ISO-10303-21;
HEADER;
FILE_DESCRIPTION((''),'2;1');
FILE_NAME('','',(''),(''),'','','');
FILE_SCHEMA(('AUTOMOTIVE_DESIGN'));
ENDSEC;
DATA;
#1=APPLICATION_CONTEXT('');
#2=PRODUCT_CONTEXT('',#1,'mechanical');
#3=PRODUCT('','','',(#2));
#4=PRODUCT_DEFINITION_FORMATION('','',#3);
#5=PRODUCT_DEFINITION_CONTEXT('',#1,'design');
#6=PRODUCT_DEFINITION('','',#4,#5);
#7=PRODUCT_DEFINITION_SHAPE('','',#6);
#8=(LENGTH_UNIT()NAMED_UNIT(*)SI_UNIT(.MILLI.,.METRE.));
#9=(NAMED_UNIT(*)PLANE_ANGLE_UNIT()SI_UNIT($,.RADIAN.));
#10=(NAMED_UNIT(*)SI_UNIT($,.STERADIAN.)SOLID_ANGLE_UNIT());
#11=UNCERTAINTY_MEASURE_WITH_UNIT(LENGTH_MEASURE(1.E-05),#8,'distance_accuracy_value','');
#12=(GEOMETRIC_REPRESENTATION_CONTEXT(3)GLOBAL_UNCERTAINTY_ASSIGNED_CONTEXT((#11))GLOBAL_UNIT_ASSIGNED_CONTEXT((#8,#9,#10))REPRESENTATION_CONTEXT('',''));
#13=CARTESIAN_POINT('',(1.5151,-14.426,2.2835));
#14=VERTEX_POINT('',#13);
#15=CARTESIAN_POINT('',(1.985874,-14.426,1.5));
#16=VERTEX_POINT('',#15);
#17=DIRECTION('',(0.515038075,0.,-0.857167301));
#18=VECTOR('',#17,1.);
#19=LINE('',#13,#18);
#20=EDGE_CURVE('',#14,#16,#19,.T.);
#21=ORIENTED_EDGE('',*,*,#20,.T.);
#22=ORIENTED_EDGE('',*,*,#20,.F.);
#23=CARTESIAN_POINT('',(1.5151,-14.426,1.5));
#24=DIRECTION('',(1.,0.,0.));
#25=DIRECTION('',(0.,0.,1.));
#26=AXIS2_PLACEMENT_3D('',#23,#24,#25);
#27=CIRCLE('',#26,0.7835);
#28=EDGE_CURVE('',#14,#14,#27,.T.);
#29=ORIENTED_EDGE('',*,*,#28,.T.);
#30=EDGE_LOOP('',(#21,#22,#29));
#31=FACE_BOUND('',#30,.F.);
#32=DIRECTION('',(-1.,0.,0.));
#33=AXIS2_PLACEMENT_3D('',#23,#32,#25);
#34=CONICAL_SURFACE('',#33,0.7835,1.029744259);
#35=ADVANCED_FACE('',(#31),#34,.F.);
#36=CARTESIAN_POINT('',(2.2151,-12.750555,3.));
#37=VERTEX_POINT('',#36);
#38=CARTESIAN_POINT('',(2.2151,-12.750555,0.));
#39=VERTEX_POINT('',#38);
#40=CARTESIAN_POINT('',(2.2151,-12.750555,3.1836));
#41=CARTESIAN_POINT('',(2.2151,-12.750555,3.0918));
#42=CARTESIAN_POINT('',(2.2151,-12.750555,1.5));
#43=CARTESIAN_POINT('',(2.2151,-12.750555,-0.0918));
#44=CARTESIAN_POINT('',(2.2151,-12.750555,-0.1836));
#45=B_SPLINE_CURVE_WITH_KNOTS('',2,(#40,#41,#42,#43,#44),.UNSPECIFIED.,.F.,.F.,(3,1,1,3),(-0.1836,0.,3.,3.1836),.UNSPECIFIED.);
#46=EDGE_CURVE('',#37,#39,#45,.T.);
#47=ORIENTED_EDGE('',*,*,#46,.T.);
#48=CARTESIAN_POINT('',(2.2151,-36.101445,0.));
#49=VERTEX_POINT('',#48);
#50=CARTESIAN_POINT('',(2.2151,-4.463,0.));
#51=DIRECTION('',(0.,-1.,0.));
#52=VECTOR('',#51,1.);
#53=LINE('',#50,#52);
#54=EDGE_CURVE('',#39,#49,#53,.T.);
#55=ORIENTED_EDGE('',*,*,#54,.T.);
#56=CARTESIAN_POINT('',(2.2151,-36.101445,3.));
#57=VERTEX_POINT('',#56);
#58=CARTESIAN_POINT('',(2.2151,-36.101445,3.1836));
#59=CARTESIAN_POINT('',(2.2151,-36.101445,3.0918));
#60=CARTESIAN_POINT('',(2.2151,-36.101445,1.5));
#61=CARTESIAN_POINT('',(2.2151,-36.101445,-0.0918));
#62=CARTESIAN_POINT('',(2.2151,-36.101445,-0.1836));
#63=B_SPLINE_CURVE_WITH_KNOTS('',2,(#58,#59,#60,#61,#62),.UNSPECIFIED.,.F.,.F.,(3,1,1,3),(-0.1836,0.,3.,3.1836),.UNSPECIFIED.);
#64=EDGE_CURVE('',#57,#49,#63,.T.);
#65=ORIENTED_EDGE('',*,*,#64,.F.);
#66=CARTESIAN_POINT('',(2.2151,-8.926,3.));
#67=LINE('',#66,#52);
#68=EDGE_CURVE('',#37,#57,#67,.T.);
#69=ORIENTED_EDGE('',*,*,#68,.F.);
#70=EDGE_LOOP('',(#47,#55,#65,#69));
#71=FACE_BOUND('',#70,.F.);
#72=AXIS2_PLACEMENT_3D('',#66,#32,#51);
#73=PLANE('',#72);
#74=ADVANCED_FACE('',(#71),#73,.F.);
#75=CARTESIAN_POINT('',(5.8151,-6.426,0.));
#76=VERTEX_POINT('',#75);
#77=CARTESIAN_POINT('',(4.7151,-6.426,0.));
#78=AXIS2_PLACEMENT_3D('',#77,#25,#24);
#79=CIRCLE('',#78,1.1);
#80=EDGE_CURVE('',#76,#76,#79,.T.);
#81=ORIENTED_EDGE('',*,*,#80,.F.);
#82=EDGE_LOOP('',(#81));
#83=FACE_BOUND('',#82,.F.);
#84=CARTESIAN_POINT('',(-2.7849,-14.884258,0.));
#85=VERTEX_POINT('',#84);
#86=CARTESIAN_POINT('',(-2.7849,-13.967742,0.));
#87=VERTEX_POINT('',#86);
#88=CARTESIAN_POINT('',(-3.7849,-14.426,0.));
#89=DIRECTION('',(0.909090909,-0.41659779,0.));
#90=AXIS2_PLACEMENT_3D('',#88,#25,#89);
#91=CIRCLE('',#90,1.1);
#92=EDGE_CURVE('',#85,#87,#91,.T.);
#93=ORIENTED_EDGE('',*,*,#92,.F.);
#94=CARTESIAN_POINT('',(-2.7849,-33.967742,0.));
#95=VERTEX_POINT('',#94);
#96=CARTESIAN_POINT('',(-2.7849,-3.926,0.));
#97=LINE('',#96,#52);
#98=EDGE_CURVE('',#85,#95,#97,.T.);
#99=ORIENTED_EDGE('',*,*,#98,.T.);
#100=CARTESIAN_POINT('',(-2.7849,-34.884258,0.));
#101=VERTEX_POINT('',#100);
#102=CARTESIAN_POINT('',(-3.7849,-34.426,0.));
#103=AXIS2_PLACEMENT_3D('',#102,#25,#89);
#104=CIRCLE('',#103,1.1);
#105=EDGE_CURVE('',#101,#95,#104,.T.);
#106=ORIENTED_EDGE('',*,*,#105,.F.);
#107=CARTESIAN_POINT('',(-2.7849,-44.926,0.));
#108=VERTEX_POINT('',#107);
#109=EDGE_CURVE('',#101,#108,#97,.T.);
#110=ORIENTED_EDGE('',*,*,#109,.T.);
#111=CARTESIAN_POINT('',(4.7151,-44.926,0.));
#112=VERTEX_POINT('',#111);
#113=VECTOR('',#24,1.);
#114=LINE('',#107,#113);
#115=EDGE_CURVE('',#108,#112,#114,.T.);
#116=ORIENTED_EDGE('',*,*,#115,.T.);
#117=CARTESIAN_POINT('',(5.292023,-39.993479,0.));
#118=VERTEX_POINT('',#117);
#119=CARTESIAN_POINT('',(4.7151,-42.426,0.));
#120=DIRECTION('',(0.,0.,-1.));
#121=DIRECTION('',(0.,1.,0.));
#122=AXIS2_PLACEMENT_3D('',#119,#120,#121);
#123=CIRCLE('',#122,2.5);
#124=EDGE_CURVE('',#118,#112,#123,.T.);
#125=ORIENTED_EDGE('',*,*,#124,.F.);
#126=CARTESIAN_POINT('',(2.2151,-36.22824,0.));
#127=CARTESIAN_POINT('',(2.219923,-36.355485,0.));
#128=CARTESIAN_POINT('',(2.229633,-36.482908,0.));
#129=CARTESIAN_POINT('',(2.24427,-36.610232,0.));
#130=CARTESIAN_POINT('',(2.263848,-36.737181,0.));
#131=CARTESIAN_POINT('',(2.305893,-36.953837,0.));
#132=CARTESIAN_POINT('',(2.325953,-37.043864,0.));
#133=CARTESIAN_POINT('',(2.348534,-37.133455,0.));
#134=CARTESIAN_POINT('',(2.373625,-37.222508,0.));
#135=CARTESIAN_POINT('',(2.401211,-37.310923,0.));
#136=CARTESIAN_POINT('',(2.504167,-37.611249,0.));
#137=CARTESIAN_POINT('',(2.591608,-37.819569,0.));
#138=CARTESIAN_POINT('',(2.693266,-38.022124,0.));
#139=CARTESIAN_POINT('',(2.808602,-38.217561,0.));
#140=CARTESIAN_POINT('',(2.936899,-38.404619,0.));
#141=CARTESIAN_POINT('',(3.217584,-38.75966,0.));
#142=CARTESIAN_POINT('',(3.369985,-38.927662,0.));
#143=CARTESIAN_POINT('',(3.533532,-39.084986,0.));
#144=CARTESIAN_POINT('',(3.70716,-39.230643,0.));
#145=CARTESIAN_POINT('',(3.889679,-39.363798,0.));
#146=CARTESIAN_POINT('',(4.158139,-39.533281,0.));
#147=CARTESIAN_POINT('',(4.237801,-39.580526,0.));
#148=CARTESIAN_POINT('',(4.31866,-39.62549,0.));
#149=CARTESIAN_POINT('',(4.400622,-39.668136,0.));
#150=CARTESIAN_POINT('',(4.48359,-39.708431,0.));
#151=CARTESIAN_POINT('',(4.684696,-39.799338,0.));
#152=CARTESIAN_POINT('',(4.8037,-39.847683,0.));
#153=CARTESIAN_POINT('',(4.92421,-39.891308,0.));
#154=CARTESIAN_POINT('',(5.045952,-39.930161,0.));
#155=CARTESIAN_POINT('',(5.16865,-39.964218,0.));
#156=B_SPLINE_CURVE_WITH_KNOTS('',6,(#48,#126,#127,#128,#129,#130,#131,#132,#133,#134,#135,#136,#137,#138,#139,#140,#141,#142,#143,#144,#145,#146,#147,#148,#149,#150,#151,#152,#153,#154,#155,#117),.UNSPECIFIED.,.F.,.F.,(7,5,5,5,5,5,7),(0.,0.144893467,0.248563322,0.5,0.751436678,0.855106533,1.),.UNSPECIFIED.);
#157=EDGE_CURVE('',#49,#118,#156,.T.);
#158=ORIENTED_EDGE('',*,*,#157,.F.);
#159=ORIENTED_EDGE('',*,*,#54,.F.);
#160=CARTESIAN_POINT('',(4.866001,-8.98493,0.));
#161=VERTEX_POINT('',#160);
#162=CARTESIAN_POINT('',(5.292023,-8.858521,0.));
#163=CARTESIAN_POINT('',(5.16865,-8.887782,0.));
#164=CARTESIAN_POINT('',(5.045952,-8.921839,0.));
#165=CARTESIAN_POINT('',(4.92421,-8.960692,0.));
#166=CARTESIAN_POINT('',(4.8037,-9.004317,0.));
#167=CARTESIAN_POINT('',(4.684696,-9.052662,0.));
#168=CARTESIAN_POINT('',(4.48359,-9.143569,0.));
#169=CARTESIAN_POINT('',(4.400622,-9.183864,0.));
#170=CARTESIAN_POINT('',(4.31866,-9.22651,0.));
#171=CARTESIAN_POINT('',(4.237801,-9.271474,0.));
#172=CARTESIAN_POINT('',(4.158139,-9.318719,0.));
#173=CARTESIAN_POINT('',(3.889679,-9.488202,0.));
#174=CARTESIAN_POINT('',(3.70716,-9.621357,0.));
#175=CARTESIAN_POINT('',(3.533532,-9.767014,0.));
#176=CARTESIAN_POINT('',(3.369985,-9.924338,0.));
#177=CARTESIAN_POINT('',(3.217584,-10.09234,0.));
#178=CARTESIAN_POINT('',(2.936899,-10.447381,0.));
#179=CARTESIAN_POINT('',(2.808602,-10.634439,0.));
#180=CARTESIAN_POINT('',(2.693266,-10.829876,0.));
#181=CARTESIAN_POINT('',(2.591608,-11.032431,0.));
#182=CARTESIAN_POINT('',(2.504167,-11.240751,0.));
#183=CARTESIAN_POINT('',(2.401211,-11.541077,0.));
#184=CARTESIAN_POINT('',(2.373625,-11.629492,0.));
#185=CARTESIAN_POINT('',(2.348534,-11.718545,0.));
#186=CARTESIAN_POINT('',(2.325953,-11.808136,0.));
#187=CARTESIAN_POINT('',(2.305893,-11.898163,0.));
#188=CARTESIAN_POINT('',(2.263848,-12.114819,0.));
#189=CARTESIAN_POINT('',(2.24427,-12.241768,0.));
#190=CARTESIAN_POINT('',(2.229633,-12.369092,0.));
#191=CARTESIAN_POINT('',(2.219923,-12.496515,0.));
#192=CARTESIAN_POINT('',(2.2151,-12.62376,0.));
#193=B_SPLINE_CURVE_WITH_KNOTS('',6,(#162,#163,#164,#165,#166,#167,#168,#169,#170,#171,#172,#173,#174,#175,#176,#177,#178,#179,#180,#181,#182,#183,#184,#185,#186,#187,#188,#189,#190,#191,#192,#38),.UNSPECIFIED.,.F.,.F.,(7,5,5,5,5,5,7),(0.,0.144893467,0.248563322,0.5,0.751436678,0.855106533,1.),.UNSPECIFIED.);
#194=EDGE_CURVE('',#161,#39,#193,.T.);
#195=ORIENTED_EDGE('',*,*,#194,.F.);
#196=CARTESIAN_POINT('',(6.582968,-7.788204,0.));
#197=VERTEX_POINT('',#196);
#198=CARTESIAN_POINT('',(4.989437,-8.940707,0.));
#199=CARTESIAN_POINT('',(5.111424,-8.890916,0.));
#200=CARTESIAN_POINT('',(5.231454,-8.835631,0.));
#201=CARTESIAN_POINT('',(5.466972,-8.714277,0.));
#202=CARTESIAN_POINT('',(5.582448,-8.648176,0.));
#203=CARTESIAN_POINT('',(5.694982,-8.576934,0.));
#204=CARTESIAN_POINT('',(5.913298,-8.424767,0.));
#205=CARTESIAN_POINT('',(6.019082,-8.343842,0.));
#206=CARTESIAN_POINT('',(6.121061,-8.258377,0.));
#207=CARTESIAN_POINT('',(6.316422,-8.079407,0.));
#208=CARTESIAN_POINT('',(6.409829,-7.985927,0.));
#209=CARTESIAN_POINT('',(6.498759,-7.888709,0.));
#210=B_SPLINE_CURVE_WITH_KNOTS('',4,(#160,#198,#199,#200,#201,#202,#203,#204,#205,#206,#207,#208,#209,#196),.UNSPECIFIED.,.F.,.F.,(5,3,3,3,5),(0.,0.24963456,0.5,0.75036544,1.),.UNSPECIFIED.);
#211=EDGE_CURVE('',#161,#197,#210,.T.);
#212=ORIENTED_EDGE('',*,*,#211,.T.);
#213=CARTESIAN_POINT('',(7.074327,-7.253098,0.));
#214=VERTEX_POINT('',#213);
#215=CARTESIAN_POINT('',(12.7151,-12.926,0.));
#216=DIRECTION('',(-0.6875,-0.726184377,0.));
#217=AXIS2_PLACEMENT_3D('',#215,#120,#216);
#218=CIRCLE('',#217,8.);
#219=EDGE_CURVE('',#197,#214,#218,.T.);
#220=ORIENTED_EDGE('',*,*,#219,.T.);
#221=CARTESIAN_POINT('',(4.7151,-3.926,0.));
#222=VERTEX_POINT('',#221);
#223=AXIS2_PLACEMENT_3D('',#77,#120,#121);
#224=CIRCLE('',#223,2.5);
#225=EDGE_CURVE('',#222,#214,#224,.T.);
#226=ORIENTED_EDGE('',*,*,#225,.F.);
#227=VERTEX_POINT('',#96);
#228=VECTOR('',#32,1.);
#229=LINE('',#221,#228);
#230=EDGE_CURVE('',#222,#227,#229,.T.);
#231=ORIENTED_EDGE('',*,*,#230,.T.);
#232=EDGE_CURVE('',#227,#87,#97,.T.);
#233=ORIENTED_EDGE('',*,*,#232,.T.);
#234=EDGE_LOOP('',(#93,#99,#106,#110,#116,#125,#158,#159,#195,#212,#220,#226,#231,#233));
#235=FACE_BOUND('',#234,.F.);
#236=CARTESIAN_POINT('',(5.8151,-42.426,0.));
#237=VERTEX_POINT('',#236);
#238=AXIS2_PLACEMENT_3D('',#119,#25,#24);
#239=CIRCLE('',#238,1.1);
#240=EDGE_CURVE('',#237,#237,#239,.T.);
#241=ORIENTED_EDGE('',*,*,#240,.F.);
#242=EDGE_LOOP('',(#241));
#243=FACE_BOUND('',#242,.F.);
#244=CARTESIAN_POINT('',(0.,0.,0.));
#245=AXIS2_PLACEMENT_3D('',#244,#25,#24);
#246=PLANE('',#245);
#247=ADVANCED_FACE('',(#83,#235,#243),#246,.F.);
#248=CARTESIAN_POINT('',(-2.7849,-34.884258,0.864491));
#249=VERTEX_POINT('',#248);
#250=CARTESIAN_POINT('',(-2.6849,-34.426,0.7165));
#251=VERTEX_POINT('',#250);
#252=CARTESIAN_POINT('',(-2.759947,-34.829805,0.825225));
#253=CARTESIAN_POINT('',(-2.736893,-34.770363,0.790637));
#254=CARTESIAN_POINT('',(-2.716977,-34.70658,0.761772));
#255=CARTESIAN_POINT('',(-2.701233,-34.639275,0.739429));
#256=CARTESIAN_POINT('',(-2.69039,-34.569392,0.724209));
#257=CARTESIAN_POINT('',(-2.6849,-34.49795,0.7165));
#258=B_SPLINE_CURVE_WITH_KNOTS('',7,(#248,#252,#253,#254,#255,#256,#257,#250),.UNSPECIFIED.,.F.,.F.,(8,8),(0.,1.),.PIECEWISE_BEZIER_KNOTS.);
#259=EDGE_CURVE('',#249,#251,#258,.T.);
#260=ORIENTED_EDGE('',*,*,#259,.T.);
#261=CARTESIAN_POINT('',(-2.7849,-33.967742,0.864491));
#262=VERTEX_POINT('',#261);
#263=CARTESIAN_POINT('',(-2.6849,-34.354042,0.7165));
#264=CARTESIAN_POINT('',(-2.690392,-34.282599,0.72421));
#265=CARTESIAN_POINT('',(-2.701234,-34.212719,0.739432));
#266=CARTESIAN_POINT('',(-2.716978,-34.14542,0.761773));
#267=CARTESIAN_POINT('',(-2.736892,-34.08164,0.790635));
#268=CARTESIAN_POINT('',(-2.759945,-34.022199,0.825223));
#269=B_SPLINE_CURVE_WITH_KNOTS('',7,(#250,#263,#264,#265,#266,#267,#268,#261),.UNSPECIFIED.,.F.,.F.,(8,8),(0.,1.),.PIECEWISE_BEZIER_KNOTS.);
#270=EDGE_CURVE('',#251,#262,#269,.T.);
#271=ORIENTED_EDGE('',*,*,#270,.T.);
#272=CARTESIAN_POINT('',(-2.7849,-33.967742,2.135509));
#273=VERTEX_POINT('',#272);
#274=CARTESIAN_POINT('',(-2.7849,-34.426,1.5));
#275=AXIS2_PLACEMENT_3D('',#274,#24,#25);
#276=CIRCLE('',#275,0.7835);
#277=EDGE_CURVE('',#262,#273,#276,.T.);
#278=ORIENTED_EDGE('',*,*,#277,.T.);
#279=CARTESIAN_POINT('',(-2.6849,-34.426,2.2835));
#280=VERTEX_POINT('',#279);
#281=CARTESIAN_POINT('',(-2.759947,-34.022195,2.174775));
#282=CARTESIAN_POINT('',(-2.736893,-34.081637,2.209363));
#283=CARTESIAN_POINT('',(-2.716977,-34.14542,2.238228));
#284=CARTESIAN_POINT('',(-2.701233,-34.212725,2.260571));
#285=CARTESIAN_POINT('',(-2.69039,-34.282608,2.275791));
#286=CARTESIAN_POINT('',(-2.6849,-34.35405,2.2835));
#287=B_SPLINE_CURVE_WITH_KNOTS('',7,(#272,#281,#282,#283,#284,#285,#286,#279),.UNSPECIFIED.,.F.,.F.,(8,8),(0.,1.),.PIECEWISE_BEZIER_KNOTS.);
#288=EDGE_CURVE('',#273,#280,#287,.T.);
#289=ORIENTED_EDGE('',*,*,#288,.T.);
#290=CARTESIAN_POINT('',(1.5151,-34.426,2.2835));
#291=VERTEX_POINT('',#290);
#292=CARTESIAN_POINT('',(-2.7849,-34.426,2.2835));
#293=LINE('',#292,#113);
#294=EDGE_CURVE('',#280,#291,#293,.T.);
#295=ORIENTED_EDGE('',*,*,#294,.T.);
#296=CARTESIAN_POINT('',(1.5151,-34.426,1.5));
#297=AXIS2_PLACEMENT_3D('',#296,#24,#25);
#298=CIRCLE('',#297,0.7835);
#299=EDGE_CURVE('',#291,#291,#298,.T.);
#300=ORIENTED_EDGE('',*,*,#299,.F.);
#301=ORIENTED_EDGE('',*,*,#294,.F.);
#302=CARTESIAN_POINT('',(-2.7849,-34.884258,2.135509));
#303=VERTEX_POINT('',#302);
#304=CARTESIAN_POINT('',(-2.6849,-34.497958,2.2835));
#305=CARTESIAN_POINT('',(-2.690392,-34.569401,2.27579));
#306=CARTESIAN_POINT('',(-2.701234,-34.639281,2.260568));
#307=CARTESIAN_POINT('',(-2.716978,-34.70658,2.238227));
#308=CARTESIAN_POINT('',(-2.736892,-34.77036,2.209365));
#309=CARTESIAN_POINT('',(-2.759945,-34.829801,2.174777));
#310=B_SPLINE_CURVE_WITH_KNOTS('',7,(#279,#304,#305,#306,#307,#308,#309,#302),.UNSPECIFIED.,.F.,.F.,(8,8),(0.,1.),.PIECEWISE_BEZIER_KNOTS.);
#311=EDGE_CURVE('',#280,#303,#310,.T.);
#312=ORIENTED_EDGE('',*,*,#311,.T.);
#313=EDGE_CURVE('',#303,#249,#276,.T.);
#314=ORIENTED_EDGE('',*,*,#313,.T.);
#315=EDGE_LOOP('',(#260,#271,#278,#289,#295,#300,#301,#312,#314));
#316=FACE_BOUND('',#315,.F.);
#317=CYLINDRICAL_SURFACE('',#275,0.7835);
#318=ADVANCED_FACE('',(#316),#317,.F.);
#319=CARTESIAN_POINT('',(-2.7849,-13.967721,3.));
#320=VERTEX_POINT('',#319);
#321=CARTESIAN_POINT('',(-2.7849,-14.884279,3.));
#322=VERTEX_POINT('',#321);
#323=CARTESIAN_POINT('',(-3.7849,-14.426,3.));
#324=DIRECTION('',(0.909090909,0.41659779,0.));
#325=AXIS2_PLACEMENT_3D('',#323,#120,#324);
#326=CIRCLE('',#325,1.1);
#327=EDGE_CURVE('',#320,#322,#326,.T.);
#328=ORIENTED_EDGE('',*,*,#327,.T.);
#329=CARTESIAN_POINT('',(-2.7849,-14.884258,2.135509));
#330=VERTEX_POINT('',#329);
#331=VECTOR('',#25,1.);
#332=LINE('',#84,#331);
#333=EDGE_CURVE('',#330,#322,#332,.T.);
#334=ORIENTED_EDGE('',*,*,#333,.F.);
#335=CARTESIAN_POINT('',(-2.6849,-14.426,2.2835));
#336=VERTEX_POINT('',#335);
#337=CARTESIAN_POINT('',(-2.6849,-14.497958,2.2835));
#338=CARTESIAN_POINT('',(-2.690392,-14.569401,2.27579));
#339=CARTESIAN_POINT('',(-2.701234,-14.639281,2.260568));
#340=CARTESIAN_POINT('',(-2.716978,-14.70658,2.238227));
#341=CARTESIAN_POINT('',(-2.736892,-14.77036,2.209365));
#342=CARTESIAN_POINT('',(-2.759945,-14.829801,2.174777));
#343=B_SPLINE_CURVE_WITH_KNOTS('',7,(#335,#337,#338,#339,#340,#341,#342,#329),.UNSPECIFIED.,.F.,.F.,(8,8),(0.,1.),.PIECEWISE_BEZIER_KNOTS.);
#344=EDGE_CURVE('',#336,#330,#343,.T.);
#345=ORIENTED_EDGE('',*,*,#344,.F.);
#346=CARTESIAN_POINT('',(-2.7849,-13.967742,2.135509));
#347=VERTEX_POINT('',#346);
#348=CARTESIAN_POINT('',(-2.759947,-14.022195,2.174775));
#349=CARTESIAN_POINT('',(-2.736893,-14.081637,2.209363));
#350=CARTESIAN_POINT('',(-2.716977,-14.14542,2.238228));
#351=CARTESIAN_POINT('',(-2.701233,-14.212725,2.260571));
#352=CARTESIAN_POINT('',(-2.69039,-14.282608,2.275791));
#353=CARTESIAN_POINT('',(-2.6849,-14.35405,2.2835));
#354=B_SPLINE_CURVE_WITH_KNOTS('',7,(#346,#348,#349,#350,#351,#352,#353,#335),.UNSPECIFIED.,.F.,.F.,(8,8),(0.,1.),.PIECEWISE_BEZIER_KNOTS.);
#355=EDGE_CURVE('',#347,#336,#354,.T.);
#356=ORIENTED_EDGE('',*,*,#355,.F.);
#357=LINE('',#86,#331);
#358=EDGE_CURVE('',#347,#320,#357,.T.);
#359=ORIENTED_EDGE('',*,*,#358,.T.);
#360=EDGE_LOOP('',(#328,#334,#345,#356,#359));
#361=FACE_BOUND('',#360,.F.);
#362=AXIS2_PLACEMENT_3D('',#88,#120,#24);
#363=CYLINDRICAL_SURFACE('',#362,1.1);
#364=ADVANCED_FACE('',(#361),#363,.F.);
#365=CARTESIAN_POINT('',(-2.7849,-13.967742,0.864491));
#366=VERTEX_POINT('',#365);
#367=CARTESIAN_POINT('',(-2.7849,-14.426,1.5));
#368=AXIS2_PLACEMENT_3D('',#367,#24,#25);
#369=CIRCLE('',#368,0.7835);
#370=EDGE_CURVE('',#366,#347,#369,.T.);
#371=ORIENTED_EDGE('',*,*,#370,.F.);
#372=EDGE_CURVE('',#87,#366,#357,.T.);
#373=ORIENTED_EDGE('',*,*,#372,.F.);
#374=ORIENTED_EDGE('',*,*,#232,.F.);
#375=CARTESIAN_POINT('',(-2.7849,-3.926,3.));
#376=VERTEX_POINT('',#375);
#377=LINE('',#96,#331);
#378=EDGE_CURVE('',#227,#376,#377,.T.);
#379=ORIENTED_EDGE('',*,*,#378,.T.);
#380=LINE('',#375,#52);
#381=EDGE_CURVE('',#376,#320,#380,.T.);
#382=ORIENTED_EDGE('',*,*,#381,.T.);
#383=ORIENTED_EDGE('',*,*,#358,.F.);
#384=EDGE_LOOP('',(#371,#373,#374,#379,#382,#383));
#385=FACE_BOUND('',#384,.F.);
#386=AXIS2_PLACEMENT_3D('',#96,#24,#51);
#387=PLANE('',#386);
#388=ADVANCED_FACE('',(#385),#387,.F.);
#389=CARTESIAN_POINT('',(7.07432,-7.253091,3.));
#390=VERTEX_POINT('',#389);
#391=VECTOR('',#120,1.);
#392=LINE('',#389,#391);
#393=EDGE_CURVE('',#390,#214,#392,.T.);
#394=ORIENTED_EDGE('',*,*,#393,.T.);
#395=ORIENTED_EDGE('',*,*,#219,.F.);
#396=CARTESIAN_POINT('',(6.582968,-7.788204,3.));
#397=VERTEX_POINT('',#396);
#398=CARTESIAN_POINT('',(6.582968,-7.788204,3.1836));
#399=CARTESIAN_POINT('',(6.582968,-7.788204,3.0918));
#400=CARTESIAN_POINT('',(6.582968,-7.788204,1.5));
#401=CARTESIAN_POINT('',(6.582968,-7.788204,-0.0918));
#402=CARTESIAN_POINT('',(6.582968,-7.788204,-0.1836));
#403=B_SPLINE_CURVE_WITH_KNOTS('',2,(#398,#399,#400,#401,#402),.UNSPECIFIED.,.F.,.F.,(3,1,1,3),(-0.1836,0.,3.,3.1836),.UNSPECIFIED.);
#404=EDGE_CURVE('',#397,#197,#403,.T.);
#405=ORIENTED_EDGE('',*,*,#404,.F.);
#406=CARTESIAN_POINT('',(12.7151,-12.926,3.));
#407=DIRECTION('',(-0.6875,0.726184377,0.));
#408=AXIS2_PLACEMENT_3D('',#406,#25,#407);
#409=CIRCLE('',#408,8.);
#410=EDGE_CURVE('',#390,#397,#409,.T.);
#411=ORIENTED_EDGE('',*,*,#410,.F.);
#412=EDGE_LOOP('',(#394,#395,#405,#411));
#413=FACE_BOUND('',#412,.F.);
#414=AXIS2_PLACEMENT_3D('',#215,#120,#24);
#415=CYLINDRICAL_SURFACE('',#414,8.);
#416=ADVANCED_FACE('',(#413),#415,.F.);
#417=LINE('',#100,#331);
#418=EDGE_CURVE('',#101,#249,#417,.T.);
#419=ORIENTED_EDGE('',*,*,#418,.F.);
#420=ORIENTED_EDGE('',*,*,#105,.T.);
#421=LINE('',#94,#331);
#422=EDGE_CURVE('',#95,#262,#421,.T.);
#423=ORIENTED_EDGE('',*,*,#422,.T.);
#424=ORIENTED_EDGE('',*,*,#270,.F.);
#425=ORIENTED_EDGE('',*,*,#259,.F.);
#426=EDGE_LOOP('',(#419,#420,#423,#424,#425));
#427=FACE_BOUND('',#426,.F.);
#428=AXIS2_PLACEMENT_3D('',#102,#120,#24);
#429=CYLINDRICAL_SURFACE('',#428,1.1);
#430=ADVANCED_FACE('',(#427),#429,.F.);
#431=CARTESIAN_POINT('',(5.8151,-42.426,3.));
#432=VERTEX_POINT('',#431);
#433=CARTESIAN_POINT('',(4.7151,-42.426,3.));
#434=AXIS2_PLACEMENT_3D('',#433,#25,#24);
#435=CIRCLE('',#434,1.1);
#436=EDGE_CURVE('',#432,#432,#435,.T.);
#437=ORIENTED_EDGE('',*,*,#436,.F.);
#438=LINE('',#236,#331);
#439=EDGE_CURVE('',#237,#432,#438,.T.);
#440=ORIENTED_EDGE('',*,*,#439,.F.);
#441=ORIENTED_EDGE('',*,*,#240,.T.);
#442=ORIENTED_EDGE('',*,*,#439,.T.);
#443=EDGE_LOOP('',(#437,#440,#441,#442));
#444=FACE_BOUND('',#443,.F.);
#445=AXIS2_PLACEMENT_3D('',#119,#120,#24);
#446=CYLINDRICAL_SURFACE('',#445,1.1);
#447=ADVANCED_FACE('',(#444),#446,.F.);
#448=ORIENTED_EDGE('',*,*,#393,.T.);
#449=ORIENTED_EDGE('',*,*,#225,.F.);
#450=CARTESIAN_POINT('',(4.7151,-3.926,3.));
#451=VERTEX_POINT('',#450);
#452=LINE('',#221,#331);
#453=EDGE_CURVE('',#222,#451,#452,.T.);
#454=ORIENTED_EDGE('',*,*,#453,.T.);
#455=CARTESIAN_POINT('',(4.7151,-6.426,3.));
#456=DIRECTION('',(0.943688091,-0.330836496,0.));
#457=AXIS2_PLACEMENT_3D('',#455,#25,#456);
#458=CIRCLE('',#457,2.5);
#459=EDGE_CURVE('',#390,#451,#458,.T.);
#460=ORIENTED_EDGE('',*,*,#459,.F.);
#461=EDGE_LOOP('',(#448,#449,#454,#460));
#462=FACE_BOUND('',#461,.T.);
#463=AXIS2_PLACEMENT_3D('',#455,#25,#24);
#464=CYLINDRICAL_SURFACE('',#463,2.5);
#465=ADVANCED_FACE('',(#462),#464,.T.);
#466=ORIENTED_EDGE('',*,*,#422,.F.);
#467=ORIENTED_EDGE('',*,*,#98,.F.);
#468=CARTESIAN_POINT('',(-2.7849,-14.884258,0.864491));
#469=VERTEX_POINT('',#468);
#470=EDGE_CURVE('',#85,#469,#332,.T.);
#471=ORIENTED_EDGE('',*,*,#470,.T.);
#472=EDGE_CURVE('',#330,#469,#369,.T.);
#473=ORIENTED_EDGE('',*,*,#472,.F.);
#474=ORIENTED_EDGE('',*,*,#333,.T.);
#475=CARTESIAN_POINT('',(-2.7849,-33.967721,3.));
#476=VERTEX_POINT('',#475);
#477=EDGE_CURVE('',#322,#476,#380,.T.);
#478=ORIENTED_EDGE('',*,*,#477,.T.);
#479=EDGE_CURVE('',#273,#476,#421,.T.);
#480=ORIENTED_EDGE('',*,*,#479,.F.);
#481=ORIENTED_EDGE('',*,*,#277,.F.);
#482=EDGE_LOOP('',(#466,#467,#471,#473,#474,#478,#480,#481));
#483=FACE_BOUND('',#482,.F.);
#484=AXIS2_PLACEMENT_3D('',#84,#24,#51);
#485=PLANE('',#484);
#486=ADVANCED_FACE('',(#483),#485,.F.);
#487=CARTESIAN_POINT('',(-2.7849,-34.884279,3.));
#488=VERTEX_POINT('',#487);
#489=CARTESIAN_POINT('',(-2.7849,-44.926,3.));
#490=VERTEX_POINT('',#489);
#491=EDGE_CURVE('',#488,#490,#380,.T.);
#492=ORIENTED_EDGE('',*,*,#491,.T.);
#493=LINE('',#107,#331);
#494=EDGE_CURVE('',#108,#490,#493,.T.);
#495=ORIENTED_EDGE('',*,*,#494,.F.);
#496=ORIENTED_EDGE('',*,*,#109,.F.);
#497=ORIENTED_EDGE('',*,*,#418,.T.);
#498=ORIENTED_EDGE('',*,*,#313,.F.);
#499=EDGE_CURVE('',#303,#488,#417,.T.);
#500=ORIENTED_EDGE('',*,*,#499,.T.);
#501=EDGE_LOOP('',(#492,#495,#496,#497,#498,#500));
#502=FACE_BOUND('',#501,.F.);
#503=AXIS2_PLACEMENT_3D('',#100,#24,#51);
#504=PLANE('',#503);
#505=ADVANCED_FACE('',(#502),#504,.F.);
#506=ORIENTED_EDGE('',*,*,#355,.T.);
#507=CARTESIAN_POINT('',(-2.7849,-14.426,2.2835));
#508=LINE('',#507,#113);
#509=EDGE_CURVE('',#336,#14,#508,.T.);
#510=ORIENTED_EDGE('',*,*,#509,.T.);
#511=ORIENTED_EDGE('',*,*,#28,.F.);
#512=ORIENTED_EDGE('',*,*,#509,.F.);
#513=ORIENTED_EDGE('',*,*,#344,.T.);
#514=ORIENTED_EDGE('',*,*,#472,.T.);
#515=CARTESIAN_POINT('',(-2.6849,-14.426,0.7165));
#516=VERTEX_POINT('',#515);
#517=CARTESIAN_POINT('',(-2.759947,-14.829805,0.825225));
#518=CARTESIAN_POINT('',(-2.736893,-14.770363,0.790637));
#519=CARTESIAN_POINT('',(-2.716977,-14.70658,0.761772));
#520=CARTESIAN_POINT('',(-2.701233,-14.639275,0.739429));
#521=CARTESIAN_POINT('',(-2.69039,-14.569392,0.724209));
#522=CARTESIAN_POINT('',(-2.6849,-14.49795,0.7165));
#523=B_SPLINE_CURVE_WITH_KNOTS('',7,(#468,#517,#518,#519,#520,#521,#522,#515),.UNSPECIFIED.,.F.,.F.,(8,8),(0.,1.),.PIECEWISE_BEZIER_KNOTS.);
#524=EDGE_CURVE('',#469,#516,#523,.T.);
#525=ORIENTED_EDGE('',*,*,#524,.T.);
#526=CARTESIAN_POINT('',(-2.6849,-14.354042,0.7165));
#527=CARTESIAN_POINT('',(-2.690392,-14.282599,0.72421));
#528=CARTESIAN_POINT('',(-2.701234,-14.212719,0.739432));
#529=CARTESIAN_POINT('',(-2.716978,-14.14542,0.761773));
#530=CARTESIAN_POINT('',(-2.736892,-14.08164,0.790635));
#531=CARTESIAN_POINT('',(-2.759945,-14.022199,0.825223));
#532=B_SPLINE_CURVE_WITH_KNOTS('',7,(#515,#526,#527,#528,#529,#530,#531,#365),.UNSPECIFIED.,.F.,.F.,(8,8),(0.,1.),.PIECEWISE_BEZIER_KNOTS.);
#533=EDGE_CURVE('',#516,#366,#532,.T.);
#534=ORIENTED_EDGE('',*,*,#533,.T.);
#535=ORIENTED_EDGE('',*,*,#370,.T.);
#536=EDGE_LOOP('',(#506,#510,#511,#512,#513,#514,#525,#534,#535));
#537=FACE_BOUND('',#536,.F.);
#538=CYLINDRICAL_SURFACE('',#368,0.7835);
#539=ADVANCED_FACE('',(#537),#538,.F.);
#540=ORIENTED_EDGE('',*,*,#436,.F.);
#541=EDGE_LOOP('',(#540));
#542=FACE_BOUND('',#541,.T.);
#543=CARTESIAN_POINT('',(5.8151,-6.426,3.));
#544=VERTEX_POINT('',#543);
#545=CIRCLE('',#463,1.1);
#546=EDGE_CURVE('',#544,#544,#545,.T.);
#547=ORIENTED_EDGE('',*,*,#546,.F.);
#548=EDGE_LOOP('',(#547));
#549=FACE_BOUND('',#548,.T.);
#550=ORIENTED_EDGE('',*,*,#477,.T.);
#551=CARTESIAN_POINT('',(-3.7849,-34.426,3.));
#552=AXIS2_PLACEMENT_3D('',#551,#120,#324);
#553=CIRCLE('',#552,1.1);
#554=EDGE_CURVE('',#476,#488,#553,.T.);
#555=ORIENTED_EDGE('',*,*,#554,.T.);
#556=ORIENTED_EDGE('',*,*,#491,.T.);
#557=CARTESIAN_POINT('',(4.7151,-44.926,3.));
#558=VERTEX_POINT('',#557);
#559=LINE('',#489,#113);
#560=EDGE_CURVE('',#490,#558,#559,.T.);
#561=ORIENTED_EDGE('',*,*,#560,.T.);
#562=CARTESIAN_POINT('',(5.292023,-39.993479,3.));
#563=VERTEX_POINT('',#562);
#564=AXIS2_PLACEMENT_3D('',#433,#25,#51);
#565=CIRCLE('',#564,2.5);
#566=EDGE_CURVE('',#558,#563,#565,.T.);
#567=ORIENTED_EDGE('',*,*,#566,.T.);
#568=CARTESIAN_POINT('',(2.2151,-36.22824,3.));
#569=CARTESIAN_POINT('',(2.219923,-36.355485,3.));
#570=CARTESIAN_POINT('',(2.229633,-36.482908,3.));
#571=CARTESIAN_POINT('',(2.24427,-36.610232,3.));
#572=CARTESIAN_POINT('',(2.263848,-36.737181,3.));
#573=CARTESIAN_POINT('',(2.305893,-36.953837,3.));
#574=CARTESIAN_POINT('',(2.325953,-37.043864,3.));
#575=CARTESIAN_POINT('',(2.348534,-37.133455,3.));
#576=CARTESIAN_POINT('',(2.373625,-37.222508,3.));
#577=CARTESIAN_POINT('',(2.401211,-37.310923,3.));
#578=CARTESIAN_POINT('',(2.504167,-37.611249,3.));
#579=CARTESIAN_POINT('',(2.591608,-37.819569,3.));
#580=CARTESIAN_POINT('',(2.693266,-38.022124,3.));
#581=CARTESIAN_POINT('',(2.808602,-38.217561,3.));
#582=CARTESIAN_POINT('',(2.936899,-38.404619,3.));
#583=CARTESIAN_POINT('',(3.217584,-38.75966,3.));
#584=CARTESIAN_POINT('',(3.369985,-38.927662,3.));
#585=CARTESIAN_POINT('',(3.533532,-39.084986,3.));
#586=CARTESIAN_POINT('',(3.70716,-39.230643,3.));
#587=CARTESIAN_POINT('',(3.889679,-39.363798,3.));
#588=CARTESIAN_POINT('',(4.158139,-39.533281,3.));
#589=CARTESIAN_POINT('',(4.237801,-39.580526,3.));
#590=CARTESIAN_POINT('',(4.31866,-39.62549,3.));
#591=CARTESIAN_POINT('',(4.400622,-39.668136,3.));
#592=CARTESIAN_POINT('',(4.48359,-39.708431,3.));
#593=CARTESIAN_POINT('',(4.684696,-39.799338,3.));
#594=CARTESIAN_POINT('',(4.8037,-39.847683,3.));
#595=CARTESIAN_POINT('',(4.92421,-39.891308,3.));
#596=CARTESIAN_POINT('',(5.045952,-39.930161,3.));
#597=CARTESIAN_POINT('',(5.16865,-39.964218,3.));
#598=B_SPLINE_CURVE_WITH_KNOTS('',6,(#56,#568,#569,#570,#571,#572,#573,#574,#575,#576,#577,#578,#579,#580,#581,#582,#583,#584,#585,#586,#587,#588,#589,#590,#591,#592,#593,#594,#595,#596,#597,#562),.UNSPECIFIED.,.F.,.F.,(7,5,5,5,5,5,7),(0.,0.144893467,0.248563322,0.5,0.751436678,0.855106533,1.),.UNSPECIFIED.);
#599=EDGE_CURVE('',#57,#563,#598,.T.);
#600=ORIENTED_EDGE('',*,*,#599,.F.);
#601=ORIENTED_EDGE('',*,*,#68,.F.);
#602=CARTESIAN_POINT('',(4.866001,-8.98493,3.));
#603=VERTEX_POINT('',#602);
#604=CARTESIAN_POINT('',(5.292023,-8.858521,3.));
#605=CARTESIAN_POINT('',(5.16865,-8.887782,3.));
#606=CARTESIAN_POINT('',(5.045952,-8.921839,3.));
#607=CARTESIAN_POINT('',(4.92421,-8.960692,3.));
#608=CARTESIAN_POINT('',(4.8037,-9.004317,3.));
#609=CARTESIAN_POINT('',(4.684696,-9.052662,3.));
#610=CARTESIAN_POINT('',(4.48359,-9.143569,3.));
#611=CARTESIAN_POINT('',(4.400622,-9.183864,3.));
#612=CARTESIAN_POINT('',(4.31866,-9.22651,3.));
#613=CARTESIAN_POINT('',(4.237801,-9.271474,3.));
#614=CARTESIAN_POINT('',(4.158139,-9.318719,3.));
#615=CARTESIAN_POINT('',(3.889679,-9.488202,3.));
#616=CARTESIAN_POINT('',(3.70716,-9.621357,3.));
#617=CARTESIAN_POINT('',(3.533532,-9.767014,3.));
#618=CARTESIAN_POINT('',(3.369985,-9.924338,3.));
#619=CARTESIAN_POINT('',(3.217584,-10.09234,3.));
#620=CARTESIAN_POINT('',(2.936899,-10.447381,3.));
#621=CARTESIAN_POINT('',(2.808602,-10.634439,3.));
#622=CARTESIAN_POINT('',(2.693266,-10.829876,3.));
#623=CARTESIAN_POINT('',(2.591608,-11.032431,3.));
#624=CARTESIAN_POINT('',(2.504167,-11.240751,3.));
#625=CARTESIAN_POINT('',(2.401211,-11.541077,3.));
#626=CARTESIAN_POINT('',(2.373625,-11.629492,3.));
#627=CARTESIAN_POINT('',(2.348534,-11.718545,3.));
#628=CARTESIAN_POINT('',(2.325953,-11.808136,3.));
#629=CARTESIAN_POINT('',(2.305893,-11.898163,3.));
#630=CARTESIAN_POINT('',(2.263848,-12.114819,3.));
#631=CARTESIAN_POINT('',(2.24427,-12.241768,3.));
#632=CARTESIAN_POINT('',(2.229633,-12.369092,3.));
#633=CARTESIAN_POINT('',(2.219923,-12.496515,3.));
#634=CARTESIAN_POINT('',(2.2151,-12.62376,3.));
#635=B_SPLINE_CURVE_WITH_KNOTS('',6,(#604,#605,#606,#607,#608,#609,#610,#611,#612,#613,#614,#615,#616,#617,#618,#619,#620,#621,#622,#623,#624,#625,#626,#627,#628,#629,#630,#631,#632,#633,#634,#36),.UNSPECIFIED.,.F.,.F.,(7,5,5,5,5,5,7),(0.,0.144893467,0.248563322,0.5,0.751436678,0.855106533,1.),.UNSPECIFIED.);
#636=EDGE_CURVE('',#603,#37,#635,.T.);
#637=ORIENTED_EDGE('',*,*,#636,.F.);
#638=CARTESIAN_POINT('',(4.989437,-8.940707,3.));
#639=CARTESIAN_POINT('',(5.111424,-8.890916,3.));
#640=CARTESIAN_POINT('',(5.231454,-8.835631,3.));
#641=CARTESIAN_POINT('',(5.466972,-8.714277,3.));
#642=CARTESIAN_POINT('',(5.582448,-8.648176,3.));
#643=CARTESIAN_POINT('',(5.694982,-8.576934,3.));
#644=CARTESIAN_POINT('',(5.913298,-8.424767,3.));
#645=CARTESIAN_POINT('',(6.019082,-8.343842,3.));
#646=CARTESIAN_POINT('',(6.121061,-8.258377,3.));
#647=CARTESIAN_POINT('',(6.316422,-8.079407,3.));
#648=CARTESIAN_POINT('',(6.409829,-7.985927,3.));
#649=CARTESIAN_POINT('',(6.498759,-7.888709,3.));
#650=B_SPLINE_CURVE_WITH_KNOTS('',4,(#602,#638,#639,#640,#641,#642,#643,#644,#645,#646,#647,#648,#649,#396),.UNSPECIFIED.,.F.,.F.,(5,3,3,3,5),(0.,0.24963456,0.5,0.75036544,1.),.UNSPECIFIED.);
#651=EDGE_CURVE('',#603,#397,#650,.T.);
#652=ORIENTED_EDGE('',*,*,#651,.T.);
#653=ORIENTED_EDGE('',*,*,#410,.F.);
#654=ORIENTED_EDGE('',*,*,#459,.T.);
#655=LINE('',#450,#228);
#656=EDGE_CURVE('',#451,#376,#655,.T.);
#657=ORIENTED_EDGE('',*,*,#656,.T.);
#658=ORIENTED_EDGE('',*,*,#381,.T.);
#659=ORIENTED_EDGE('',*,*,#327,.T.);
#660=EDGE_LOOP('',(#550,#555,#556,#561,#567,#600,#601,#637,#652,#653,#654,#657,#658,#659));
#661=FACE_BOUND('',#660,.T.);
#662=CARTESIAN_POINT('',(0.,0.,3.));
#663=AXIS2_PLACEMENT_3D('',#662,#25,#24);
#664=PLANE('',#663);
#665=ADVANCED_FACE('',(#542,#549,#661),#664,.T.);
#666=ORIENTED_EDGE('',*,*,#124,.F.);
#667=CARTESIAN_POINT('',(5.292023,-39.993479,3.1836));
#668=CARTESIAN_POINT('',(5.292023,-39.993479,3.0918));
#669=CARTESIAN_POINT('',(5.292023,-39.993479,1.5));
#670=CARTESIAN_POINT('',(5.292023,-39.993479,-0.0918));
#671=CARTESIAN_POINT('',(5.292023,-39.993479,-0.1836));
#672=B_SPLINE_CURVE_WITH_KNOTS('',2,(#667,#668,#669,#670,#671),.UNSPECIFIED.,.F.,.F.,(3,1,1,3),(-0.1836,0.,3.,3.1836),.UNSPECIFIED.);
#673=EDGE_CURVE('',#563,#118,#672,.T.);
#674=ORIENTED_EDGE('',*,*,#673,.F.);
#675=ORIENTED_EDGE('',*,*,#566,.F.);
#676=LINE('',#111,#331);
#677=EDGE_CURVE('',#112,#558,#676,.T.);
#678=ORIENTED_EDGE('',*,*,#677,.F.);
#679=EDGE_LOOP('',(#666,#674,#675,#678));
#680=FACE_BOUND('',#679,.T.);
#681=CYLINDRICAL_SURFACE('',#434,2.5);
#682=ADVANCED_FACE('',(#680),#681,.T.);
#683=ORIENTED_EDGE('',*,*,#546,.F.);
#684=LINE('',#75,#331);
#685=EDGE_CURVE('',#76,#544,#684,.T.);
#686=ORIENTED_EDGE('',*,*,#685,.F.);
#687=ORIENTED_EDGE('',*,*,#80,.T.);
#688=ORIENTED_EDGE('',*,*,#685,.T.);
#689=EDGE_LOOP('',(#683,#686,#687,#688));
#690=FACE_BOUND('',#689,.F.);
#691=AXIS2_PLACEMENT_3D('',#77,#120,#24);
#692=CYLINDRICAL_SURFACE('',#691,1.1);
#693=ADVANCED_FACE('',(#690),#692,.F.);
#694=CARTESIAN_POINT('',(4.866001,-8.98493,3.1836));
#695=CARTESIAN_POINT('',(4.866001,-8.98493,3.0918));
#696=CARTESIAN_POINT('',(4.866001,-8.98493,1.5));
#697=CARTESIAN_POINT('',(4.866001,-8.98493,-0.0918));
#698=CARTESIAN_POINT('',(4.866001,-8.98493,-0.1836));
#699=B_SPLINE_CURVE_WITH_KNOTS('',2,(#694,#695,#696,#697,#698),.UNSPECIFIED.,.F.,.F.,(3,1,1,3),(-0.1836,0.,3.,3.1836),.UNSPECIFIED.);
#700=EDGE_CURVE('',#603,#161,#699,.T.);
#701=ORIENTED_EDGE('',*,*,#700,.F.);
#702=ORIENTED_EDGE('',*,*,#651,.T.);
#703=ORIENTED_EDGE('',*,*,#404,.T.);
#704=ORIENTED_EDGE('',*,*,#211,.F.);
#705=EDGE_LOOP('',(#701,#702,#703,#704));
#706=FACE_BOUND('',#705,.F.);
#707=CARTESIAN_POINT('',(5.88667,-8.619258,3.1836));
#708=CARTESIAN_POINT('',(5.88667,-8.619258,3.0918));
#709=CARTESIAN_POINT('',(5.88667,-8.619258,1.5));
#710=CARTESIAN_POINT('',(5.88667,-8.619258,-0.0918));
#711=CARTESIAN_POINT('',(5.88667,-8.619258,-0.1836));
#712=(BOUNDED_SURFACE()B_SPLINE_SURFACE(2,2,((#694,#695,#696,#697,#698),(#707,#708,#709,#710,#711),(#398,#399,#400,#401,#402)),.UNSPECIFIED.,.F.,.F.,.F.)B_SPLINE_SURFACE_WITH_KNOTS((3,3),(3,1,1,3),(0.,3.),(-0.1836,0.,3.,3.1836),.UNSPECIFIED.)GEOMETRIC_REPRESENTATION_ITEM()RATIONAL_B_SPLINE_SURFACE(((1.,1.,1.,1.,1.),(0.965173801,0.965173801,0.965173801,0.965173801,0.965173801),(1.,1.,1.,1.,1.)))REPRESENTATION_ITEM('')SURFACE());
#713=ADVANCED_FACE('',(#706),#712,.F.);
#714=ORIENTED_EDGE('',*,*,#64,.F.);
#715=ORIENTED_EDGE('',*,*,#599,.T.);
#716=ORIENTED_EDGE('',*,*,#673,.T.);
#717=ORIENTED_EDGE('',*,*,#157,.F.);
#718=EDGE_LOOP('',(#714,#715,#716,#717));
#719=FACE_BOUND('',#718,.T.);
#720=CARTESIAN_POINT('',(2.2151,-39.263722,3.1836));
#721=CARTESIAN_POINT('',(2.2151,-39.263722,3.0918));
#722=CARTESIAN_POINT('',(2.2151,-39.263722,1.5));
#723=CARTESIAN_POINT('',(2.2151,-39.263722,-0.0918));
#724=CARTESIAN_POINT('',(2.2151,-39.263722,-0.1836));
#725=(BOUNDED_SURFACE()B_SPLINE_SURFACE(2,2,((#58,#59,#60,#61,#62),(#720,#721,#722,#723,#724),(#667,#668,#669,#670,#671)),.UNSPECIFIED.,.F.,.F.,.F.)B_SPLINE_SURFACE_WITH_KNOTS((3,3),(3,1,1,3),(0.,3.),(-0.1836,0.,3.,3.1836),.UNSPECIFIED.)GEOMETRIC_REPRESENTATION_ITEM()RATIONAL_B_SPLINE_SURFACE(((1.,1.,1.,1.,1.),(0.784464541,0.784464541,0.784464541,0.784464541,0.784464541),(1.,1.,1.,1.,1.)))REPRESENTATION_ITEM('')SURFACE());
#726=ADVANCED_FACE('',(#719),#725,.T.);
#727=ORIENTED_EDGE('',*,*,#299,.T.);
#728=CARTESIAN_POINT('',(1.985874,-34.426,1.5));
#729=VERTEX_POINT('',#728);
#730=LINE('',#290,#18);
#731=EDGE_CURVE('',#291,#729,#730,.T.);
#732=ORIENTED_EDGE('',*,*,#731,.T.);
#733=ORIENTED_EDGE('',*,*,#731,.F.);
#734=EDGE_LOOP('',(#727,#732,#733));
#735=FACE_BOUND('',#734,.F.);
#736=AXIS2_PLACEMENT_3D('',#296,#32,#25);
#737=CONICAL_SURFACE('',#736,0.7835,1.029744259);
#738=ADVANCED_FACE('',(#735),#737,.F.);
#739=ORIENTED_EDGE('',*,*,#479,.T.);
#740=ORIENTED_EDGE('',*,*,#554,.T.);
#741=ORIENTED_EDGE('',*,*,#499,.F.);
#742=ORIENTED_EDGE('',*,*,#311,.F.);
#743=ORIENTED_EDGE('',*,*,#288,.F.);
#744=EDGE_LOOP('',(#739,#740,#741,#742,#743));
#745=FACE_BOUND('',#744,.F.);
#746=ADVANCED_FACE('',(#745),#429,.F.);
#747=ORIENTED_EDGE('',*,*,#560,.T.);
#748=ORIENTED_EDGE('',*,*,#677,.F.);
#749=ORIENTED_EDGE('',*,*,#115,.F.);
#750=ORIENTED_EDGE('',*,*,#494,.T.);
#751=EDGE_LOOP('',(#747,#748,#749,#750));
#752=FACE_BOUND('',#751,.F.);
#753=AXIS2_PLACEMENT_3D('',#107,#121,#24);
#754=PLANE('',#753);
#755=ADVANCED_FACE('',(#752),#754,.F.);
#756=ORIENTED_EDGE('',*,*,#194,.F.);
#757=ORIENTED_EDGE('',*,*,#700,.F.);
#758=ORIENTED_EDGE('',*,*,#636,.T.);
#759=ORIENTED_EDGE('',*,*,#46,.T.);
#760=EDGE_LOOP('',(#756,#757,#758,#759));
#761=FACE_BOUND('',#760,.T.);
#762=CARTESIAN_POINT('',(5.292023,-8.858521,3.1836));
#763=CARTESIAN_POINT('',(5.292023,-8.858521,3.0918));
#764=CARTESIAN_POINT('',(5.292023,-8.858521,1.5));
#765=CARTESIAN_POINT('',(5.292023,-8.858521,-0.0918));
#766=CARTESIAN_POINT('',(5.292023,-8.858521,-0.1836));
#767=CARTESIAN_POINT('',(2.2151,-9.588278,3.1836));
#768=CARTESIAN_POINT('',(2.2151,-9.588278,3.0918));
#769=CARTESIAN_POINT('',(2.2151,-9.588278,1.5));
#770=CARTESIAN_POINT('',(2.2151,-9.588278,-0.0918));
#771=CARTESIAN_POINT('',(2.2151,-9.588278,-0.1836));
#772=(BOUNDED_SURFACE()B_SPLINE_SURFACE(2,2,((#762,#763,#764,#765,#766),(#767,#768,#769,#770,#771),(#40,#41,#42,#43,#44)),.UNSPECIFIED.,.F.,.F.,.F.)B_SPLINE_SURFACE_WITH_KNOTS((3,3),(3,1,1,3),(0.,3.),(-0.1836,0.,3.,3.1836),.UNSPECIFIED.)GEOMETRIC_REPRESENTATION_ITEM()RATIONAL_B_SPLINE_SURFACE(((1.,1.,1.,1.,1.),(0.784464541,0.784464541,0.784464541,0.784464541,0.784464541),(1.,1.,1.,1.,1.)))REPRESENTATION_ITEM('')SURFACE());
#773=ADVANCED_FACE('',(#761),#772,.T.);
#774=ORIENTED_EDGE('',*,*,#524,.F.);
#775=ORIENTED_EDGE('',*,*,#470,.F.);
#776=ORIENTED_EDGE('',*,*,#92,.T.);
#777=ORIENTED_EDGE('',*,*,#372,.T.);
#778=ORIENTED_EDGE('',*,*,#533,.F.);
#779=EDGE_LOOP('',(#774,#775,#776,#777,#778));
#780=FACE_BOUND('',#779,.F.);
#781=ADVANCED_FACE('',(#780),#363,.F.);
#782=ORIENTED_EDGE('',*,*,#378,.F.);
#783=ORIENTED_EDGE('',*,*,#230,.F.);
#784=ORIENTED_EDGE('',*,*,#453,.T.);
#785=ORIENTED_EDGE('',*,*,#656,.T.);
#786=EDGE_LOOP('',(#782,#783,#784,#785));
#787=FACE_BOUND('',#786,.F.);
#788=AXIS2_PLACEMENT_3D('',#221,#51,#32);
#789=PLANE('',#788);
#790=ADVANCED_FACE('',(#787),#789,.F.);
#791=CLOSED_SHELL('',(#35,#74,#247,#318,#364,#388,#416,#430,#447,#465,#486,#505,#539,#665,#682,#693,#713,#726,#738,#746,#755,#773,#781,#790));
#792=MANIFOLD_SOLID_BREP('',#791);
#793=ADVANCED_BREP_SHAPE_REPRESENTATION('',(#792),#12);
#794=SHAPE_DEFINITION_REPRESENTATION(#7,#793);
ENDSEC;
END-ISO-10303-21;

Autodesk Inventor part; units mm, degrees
ref_plane "YZ Plane" through (0, 0, 0) normal (1, 0, 0) x (0, 1, 0)
ref_plane "XZ Plane" through (0, 0, 0) normal (0, 1, 0) x (-1, 0, 0)
ref_plane "XY Plane" through (0, 0, 0) normal (0, 0, 1) x (1, 0, 0)
sketch "スケッチ1" plane through (0, 0, 0) normal (0, 0, 1) x (1, 0, 0)
  line L0 (22.7151, -43.926) -> (22.7151, -4.926) construction
  arc A0 (22.2151, -44.426) -> (22.7151, -43.926) centre (22.2151, -43.926) ccw construction
  line L1 (3.2151, -44.426) -> (22.2151, -44.426) construction
  arc A1 (2.7151, -43.926) -> (3.2151, -44.426) centre (3.2151, -43.926) ccw construction
  line L2 (2.7151, -4.926) -> (2.7151, -43.926) construction
  arc A2 (3.2151, -4.426) -> (2.7151, -4.926) centre (3.2151, -4.926) ccw construction
  line L3 (22.2151, -4.426) -> (3.2151, -4.426) construction
  arc A3 (22.7151, -4.926) -> (22.2151, -4.426) centre (22.2151, -4.926) ccw construction
  line L4 (6.2865, -24.2474) -> (6.2865, -30.6046) construction
  line L5 (6.2865, -30.6046) -> (10.1437, -30.6046) construction
  line L6 (10.1437, -30.6046) -> (10.1437, -24.2474) construction
  line L7 (10.1437, -24.2474) -> (6.2865, -24.2474) construction
  circle A4 centre (12.7151, -31.826) radius 1.1519 construction
  line L8 (19.1437, -24.2474) -> (15.2865, -24.2474) construction
  line L9 (15.2865, -24.2474) -> (15.2865, -30.6046) construction
  line L10 (15.2865, -30.6046) -> (19.1437, -30.6046) construction
  line L11 (19.1437, -30.6046) -> (19.1437, -24.2474) construction
  circle A5 centre (4.7151, -6.426) radius 1.8131 construction
  circle A6 centre (20.7151, -6.426) radius 1.8131 construction
  circle A7 centre (4.7151, -42.426) radius 1.8131 construction
  circle A8 centre (20.7151, -42.426) radius 1.8131 construction
  arc A9 (18.9651, -12.926) -> (6.4651, -12.9153) centre (12.7151, -12.926) ccw construction
  arc A10 (6.4649, -12.9153) -> (6.2151, -12.676) centre (6.2151, -12.926) ccw construction
  line L12 (6.2151, -12.676) -> (4.4651, -12.676) construction
  arc A11 (4.4651, -12.676) -> (4.4651, -13.176) centre (4.4651, -12.926) ccw construction
  line L13 (4.4651, -13.176) -> (6.2151, -13.176) construction
  arc A12 (6.2151, -13.176) -> (6.4651, -12.926) centre (6.2151, -12.926) ccw construction
  arc A13 (6.4651, -12.926) -> (6.9408, -15.3178) centre (12.7151, -12.926) ccw construction
  arc A14 (6.9408, -15.3178) -> (6.6142, -15.1825) centre (6.7099, -15.4134) ccw construction
  line L14 (6.6142, -15.1825) -> (4.9974, -15.8522) construction
  arc A15 (4.9974, -15.8522) -> (5.1888, -16.3141) centre (5.0931, -16.0831) ccw construction
  line L15 (5.1888, -16.3141) -> (6.8055, -15.6444) construction
  arc A16 (6.8055, -15.6444) -> (6.9408, -15.3178) centre (6.7099, -15.4134) ccw construction
  arc A17 (6.9408, -15.3178) -> (8.2957, -17.3454) centre (12.7151, -12.926) ccw construction
  arc A18 (8.2957, -17.3454) -> (7.9421, -17.3454) centre (8.1189, -17.5222) ccw construction
  line L16 (7.9421, -17.3454) -> (6.7047, -18.5829) construction
  arc A19 (6.7047, -18.5829) -> (7.0582, -18.9364) centre (6.8815, -18.7596) ccw construction
  line L17 (7.0582, -18.9364) -> (8.2957, -17.699) construction
  arc A20 (8.2957, -17.699) -> (8.2957, -17.3454) centre (8.1189, -17.5222) ccw construction
  arc A21 (8.2957, -17.3454) -> (10.3233, -18.7003) centre (12.7151, -12.926) ccw construction
  arc A22 (10.3233, -18.7003) -> (9.9967, -18.8356) centre (10.2277, -18.9312) ccw construction
  line L18 (9.9967, -18.8356) -> (9.327, -20.4523) construction
  arc A23 (9.327, -20.4523) -> (9.7889, -20.6437) centre (9.558, -20.548) ccw construction
  line L19 (9.7889, -20.6437) -> (10.4586, -19.0269) construction
  arc A24 (10.4586, -19.0269) -> (10.3233, -18.7003) centre (10.2277, -18.9312) ccw construction
  arc A25 (10.3233, -18.7003) -> (12.7151, -19.176) centre (12.7151, -12.926) ccw construction
  arc A26 (12.7151, -19.176) -> (12.4651, -19.426) centre (12.7151, -19.426) ccw construction
  line L20 (12.4651, -19.426) -> (12.4651, -21.176) construction
  arc A27 (12.4651, -21.176) -> (12.9651, -21.176) centre (12.7151, -21.176) ccw construction
  line L21 (12.9651, -21.176) -> (12.9651, -19.426) construction
  arc A28 (12.9651, -19.426) -> (12.7151, -19.176) centre (12.7151, -19.426) ccw construction
  arc A29 (12.7151, -19.176) -> (15.1069, -18.7003) centre (12.7151, -12.926) ccw construction
  arc A30 (15.1069, -18.7003) -> (14.9716, -19.0269) centre (15.2025, -18.9312) ccw construction
  line L22 (14.9716, -19.0269) -> (15.6413, -20.6437) construction
  arc A31 (15.6413, -20.6437) -> (16.1032, -20.4523) centre (15.8722, -20.548) ccw construction
  line L23 (16.1032, -20.4523) -> (15.4335, -18.8356) construction
  arc A32 (15.4335, -18.8356) -> (15.1069, -18.7003) centre (15.2025, -18.9312) ccw construction
  arc A33 (15.1069, -18.7003) -> (17.1345, -17.3454) centre (12.7151, -12.926) ccw construction
  arc A34 (17.1345, -17.3454) -> (17.1345, -17.699) centre (17.3113, -17.5222) ccw construction
  line L24 (17.1345, -17.699) -> (18.3719, -18.9364) construction
  arc A35 (18.3719, -18.9364) -> (18.7255, -18.5829) centre (18.5487, -18.7596) ccw construction
  line L25 (18.7255, -18.5829) -> (17.4881, -17.3454) construction
  arc A36 (17.4881, -17.3454) -> (17.1345, -17.3454) centre (17.3113, -17.5222) ccw construction
  arc A37 (17.1345, -17.3454) -> (18.4893, -15.3178) centre (12.7151, -12.926) ccw construction
  arc A38 (18.4893, -15.3178) -> (18.6246, -15.6444) centre (18.7203, -15.4134) ccw construction
  line L26 (18.6246, -15.6444) -> (20.2414, -16.3141) construction
  arc A39 (20.2414, -16.3141) -> (20.4328, -15.8522) centre (20.3371, -16.0831) ccw construction
  line L27 (20.4328, -15.8522) -> (18.816, -15.1825) construction
  arc A40 (18.816, -15.1825) -> (18.4893, -15.3178) centre (18.7203, -15.4134) ccw construction
  arc A41 (18.4893, -15.3178) -> (18.9651, -12.926) centre (12.7151, -12.926) ccw construction
  arc A42 (18.9651, -12.926) -> (19.2151, -13.176) centre (19.2151, -12.926) ccw construction
  line L28 (19.2151, -13.176) -> (20.9651, -13.176) construction
  arc A43 (20.9651, -13.176) -> (20.9651, -12.676) centre (20.9651, -12.926) ccw construction
  line L29 (20.9651, -12.676) -> (19.2151, -12.676) construction
  arc A44 (19.2151, -12.676) -> (18.9651, -12.926) centre (19.2151, -12.926) ccw construction
  circle A45 centre (4.7151, -6.426) radius 1.1
  circle A46 centre (4.7151, -42.426) radius 1.1
  circle A47 centre (4.7151, -6.426) radius 2.5
  circle A48 centre (4.7151, -42.426) radius 2.5
  circle A49 centre (12.7151, -12.926) radius 8 construction
  circle A50 centre (12.7151, -12.926) radius 8
  line L30 (12.1437, -22.2474) -> (12.1437, -32.6046)
  line L31 (12.1437, -32.6046) -> (4.2865, -32.6046)
  line L32 (4.2865, -32.6046) -> (4.2865, -22.2474)
  line L33 (4.2865, -22.2474) -> (12.1437, -22.2474)
  line L34 (7.2151, -6.426) -> (7.2151, -42.426)
  line L35 (4.7151, -3.926) -> (-2.7849, -3.926)
  line L36 (-2.7849, -3.926) -> (-2.7849, -44.926)
  line L37 (-2.7849, -44.926) -> (4.7151, -44.926)
  circle A51 centre (-3.7849, -14.426) radius 1.1
  line L38 (7.2151, -24.426) -> (-2.7849, -24.426) construction
  circle A52 centre (-3.7849, -34.426) radius 1.1
  point P0 (0, 0)
  point P1 (7.0743, -7.2531)
  point P2 (-2.7849, -13.9677)
  point P3 (-2.7849, -14.8843)
  point P4 (-2.7849, -33.9677)
  point P5 (-2.7849, -34.8843)
  point P6 (7.2151, -32.6046)
  point P7 (7.2151, -22.2474)
  point P8 (7.2151, -18.7355)
  point P9 (7.2151, -7.1165)
  dimension "d0" = 2.2
  dimension "d1" = 2.2
  dimension "d3" = 5
  dimension "d4" = 5
  dimension "d5" = 2
  dimension "d6" = 10
  dimension "d7" = 2.2
  dimension "d8" = 1
  dimension "d9" = 10
extrude "押し出し1" add sketch "スケッチ1" along normal blind 3 contours A47 A50 | L34 A50 A47 | A47 A50 L34 L33 L32 L31 A48 L37 L36 A52 A51 L35 | A48 picked at (5.5204, -8.2788) picked at (7.1889, -6.9354)
fillet "フィレット1" radius 2 4 edges at (7.2151, -22.2474, 1.5) (7.2151, -32.6046, 1.5) (4.2865, -32.6046, 1.5) (4.2865, -22.2474, 1.5)
sketch "スケッチ2" plane through (-2.7849, -33.9677, 0) normal (-1, 0, 0) x (0, 0, 1)
  line L0 (0, 20) -> (3, 20) projected
  line L1 (3, 20) -> (3, 19.0835) projected
  line L2 (3, 0) -> (3, -0.9165) projected
  point P0 (0, 33.9677)
  point P1 (1.5, 19.5417)
  point P2 (1.5, 20)
  point P3 (3, 19.5417)
  point P4 (1.5, -0.4583)
  point P5 (3, -0.4583)
hole "穴1" at (-2.7849, -14.426, 1.5) at (-2.7849, -34.426, 1.5) direction (1, 0, 0) diameter 1.567 depth 4.3 tip angle 118 thread size "M2x0.4" class "6H" standard "ISO Metric profile"
sketch "スケッチ3" plane through (0, 0, 3) normal (0, 0, 1) x (1, 0, 0)
  circle A0 centre (4.7151, -6.426) radius 1.1 projected
  arc A1 (7.2151, -6.426) -> (4.7151, -3.926) centre (4.7151, -6.426) ccw projected
  circle A2 centre (4.7151, -42.426) radius 1.1 projected
  arc A3 (4.7151, -44.926) -> (7.2151, -42.426) centre (4.7151, -42.426) ccw projected
  circle A4 centre (4.7151, -42.426) radius 2.5
  line L0 (4.7151, -8.926) -> (2.2151, -8.926)
  line L1 (2.2151, -8.926) -> (2.2151, -39.926)
  line L2 (2.2151, -39.926) -> (4.7151, -39.926)
  line L3 (-2.7849, -3.926) -> (-2.7849, -44.926) projected
  arc A5 (5.7508, -22.1743) -> (7.2151, -20.2474) centre (5.2151, -20.2474) ccw projected
  line L4 (7.2151, -20.2474) -> (7.2151, -18.7355) projected
  arc A6 (7.2151, -6.426) -> (4.7151, -3.926) centre (4.7151, -6.426) ccw projected
  line L5 (4.7151, -3.926) -> (-2.7849, -3.926) projected
  line L6 (-2.7849, -3.926) -> (-2.7849, -13.9677) projected
  line L7 (-2.7849, -44.926) -> (4.7151, -44.926) projected
  arc A7 (4.7151, -44.926) -> (7.2151, -42.426) centre (4.7151, -42.426) ccw projected
  line L8 (7.2151, -42.426) -> (7.2151, -34.6046) projected
  arc A8 (7.2151, -34.6046) -> (5.7508, -32.6777) centre (5.2151, -34.6046) ccw projected
  circle A9 centre (4.7151, -42.426) radius 1.1 projected
  circle A10 centre (4.7151, -6.426) radius 1.1 projected
  line L9 (4.2865, -30.7508) -> (4.2865, -24.1012) projected
  arc A11 (5.7508, -22.1743) -> (4.2865, -24.1012) centre (6.2865, -24.1012) ccw projected
  arc A12 (4.2865, -30.7508) -> (5.7508, -32.6777) centre (6.2865, -30.7508) ccw projected
  arc A13 (-2.7849, -14.8843) -> (-2.7849, -13.9677) centre (-3.7849, -14.426) ccw projected
  line L10 (-2.7849, -14.8843) -> (-2.7849, -33.9677) projected
  arc A14 (-2.7849, -34.8843) -> (-2.7849, -33.9677) centre (-3.7849, -34.426) ccw projected
  line L11 (-2.7849, -34.8843) -> (-2.7849, -44.926) projected
  circle A15 centre (4.7151, -6.426) radius 2.5
  arc A16 (7.2151, -7.1165) -> (7.2151, -18.7355) centre (12.7151, -12.926) ccw projected
  line L12 (7.2151, -7.1165) -> (7.2151, -6.426) projected
  point P0 (0, 0)
  point P1 (7.0743, -7.2531)
  point P2 (-2.7849, -14.8843)
  point P3 (-2.7849, -34.8843)
  point P4 (7.0743, -7.2531)
  point P5 (6.0077, -8.5659)
  dimension "d20" = 5
extrude "押し出し2" cut sketch "スケッチ3" against normal through all contours A0 | L12 A16 A15 | A15 A16 L4 A5 A11 L9 A12 A8 L8 A4 L2 L1 L0 | A13 L3 | A14 L3
fillet "フィレット2" radius 4 2 edges at (2.2151, -8.926, 1.5) (2.2151, -39.926, 1.5)
fillet "フィレット3" radius 4 1 edges at (6.0077, -8.5659, 1.5)
properties part number "asikubi_asi" material "アルミニウム 2014-T4"
